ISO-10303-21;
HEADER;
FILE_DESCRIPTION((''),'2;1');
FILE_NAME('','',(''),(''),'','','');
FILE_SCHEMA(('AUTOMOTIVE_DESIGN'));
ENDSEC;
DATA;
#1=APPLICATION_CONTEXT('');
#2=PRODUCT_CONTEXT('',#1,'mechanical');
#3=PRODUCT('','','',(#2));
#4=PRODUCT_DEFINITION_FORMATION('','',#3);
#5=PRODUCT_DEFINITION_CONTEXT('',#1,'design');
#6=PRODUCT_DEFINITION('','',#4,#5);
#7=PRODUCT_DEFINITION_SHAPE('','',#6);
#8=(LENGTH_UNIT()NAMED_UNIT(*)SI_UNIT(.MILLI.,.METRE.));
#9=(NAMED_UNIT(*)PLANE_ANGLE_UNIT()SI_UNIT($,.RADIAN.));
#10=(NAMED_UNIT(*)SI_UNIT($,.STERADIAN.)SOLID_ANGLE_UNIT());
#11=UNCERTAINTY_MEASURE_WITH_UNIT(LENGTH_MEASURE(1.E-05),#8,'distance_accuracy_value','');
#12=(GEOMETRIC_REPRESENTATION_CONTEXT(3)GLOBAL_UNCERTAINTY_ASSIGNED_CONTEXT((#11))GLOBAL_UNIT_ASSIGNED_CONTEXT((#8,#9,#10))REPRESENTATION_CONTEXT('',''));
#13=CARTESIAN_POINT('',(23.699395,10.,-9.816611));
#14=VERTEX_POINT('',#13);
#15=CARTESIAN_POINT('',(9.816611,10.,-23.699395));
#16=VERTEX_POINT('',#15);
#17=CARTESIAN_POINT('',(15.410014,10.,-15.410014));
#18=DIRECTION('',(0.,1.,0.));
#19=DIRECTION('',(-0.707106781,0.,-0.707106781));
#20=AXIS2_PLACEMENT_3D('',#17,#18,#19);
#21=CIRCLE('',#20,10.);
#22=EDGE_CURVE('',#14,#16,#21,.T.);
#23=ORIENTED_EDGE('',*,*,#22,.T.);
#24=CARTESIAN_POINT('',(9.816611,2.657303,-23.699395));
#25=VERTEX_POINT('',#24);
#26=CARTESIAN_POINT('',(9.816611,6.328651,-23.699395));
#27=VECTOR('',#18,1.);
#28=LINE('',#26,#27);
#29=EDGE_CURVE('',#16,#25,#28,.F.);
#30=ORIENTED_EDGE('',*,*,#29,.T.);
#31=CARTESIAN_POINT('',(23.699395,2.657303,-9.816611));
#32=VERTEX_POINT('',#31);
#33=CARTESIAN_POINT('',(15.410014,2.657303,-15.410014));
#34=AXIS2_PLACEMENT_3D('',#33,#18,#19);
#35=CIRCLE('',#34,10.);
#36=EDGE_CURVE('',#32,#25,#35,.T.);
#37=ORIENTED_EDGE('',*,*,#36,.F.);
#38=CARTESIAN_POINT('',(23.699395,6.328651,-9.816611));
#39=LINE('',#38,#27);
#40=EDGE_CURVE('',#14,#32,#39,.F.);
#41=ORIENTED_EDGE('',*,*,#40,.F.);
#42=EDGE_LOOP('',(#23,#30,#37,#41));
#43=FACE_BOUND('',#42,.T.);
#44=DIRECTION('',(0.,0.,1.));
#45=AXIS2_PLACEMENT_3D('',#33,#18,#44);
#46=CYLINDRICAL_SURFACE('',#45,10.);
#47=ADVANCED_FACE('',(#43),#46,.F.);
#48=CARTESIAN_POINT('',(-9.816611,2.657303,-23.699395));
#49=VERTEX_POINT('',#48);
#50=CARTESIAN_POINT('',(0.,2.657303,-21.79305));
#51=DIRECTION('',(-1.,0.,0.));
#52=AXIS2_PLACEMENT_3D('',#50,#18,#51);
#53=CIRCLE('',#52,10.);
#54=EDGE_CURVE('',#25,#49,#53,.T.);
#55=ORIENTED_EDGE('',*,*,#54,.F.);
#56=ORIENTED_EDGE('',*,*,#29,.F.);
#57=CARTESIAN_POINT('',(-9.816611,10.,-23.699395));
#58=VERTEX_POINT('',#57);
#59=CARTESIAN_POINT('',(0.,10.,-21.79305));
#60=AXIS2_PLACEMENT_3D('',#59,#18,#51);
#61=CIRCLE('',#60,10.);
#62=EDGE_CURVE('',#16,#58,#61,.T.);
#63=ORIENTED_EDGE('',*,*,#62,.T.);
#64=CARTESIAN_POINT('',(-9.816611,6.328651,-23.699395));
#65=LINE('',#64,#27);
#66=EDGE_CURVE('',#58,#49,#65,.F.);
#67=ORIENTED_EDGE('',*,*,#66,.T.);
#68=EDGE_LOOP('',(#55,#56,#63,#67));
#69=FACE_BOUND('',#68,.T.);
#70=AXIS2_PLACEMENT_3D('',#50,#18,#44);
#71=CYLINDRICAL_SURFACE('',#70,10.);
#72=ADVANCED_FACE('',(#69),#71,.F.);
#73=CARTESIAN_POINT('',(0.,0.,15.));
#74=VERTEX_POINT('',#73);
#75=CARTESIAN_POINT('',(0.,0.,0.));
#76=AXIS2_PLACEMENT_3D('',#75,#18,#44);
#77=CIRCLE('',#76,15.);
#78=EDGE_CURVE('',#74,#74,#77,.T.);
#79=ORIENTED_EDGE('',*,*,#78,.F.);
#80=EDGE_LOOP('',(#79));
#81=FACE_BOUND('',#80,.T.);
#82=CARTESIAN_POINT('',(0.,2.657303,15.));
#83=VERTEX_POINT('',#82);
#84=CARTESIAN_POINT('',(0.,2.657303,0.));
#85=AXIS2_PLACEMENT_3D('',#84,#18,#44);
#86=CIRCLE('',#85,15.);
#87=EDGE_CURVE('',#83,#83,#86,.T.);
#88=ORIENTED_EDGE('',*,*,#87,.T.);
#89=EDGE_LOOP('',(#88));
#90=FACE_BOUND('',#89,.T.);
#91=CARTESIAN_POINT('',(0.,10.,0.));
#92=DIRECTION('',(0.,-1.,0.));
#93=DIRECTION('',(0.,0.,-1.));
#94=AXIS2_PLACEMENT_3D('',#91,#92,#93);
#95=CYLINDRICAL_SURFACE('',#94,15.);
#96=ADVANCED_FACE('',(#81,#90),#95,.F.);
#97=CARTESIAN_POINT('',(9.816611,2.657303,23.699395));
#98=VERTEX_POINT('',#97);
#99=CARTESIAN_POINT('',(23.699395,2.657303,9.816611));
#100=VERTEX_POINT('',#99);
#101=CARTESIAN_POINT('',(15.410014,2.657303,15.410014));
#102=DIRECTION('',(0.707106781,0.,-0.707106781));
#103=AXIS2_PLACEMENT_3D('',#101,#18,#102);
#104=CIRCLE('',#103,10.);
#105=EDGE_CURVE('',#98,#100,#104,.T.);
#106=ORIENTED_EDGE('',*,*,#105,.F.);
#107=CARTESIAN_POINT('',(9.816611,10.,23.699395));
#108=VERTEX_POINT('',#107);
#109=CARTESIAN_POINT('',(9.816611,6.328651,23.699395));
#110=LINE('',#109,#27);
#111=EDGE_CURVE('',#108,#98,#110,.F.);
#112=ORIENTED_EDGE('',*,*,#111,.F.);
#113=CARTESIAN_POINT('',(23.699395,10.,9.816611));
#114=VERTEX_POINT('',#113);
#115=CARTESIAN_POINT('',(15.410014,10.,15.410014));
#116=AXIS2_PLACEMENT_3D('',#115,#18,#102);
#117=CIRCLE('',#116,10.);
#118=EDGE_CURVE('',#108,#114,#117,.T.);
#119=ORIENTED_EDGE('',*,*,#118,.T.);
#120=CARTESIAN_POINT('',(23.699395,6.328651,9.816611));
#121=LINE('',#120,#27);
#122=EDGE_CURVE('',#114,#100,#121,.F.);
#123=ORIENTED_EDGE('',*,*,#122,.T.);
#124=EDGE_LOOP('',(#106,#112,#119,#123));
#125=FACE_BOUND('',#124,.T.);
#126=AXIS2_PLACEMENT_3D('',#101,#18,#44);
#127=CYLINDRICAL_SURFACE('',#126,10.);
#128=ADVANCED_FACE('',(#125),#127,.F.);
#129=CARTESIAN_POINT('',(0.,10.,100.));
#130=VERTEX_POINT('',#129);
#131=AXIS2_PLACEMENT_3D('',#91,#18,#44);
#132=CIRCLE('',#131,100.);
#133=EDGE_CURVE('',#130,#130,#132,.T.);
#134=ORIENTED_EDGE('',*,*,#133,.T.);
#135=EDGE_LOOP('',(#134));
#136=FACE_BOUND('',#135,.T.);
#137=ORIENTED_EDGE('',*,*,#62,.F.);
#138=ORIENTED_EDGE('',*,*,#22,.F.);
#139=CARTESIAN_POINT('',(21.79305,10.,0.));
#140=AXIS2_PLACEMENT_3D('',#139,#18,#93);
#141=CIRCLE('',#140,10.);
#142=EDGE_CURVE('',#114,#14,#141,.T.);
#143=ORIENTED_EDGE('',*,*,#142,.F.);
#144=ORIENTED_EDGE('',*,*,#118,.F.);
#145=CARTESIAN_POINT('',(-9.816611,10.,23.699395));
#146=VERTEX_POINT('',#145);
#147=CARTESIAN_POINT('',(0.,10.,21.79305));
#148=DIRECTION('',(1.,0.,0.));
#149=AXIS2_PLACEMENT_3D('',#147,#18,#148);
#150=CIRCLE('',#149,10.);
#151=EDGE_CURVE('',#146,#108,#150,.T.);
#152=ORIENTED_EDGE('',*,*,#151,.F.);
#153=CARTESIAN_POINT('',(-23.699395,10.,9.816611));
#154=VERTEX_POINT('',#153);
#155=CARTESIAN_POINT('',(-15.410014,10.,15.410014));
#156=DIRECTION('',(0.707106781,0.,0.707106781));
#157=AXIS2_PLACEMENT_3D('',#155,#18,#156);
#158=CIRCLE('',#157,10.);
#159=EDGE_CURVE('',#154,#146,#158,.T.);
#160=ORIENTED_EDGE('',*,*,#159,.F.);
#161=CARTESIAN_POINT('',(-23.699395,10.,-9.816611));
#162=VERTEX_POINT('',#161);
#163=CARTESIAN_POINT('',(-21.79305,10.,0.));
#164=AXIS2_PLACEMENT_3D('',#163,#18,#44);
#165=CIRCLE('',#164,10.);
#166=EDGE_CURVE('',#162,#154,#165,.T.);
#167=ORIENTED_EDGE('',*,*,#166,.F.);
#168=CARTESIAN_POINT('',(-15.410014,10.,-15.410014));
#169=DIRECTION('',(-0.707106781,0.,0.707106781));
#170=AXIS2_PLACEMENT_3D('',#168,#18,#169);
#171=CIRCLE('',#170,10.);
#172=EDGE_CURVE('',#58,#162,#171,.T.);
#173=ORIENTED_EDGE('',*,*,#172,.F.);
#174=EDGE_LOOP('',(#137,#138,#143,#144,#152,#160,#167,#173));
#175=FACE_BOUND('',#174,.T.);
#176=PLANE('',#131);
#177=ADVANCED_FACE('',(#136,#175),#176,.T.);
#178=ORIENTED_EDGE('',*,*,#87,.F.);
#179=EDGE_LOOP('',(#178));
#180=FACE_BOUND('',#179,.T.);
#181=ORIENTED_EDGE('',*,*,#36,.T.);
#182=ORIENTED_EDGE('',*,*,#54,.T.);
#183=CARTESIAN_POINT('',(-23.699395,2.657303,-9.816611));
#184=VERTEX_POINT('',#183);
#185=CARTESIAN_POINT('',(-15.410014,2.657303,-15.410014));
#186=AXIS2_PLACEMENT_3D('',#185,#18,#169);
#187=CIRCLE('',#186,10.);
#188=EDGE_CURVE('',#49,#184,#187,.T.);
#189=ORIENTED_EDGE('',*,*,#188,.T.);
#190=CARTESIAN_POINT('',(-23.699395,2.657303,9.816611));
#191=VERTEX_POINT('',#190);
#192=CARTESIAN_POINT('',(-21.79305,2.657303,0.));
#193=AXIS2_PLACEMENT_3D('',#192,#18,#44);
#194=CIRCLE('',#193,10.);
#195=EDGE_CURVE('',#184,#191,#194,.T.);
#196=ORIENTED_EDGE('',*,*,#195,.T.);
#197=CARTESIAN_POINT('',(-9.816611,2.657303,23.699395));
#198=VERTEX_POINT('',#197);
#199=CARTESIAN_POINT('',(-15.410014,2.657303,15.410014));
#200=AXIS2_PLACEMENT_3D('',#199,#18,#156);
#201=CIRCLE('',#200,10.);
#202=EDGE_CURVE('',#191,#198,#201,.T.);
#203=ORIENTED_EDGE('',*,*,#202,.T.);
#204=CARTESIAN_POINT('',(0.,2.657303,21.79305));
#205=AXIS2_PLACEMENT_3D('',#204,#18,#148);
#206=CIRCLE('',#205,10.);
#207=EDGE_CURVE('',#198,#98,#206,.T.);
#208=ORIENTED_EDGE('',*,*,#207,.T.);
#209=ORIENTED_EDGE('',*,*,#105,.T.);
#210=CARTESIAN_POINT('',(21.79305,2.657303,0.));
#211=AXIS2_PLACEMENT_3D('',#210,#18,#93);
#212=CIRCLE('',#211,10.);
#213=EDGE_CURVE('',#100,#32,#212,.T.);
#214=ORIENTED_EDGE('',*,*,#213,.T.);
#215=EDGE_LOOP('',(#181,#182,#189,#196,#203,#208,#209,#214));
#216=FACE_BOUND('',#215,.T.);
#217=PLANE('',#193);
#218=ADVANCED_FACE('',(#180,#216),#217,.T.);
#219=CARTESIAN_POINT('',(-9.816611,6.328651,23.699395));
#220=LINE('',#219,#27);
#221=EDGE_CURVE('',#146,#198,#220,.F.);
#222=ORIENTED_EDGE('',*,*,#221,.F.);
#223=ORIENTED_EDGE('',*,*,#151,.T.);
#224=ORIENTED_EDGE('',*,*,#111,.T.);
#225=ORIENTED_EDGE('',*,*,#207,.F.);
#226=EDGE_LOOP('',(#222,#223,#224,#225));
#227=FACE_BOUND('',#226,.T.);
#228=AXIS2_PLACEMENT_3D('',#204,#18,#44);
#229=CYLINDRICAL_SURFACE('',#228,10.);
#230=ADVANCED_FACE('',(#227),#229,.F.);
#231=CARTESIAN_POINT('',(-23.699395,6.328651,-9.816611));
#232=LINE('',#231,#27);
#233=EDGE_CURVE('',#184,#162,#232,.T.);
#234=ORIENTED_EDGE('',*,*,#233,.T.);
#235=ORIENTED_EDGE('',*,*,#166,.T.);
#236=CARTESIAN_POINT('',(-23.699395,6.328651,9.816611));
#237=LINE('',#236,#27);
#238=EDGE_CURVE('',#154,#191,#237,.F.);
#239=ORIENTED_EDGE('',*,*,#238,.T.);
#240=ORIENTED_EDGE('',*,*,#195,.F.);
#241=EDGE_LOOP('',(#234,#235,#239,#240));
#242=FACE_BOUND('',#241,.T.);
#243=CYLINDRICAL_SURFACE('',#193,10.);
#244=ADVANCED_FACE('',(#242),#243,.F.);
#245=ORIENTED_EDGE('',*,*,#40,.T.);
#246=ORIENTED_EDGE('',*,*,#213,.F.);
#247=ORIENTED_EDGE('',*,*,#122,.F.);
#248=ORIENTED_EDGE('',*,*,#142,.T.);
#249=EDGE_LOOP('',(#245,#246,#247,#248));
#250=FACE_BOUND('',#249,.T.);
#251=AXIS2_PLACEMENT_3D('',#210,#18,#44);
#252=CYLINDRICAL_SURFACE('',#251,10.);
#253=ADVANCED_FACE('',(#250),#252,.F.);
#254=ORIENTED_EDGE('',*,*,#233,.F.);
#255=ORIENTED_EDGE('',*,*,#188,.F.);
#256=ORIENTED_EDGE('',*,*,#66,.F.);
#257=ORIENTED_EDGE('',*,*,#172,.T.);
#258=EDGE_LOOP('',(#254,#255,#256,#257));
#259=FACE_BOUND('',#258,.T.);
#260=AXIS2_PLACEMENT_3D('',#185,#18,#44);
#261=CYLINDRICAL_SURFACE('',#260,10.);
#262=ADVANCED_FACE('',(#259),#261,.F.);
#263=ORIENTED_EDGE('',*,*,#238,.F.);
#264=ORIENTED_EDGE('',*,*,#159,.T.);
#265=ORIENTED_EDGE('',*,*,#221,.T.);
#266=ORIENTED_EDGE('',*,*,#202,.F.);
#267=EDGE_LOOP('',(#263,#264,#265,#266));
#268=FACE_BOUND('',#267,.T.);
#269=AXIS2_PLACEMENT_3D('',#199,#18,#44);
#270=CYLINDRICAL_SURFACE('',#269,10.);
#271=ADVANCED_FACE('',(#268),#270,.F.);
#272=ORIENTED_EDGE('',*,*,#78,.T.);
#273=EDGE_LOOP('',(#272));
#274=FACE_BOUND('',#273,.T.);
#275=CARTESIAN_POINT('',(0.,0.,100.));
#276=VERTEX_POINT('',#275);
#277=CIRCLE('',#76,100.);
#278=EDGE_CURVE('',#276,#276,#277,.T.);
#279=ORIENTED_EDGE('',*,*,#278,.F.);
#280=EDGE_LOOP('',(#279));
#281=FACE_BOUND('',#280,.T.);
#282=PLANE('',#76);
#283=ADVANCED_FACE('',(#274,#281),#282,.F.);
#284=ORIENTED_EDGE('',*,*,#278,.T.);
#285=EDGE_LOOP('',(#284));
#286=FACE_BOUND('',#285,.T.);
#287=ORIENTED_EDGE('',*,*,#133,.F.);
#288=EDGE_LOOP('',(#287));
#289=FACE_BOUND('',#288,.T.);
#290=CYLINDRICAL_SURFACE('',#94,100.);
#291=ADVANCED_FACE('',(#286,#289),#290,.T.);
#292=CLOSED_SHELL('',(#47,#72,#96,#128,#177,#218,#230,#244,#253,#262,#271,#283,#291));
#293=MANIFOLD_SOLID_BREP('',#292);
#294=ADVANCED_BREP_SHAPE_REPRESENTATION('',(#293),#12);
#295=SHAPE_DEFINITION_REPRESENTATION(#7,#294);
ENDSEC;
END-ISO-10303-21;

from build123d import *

# Parameters (mm, degrees)
SKETCH1_R           = 100
BOSS_EXTRUDE1_DEPTH = 10
SKETCH2_R           = 15
CUT_EXTRUDE1_DEPTH  = 142.774468788
SKETCH3_R           = 10
CUT_EXTRUDE2_DEPTH  = 7.34269734
CIRPATTERN1_COUNT   = 8


with BuildPart() as part:
    # Sketch1 → Boss-Extrude1 (new body)
    with BuildSketch(Plane(origin=(0, 0, 0), x_dir=(1, 0, 0), z_dir=(0, 1, 0))):
        Circle(SKETCH1_R)
    extrude(amount=BOSS_EXTRUDE1_DEPTH)

    # Sketch2 → Cut-Extrude1 (cut, through all)
    with BuildSketch(Plane(origin=(0, 0, 0), x_dir=(1, 0, 0), z_dir=(0, 1, 0))):
        Circle(SKETCH2_R)
    extrude(amount=CUT_EXTRUDE1_DEPTH, mode=Mode.SUBTRACT)

    # Sketch3 → Cut-Extrude2 (cut)
    with BuildSketch(Plane(origin=(0, 10, 0), x_dir=(1, 0, 0), z_dir=(0, 1, 0))):
        with Locations((-21.793050468, 0)):
            Circle(SKETCH3_R)
    cut_extrude2 = extrude(amount=-CUT_EXTRUDE2_DEPTH, mode=Mode.SUBTRACT)

    # CirPattern1: Cut-Extrude2 ×8 about axis
    cirpattern1_axis = Axis((0, 0, 0), (0, 1, 0))
    for i in range(1, CIRPATTERN1_COUNT):
        add(cut_extrude2.rotate(cirpattern1_axis, i * 360 / CIRPATTERN1_COUNT), mode=Mode.SUBTRACT)


solid = part.part
